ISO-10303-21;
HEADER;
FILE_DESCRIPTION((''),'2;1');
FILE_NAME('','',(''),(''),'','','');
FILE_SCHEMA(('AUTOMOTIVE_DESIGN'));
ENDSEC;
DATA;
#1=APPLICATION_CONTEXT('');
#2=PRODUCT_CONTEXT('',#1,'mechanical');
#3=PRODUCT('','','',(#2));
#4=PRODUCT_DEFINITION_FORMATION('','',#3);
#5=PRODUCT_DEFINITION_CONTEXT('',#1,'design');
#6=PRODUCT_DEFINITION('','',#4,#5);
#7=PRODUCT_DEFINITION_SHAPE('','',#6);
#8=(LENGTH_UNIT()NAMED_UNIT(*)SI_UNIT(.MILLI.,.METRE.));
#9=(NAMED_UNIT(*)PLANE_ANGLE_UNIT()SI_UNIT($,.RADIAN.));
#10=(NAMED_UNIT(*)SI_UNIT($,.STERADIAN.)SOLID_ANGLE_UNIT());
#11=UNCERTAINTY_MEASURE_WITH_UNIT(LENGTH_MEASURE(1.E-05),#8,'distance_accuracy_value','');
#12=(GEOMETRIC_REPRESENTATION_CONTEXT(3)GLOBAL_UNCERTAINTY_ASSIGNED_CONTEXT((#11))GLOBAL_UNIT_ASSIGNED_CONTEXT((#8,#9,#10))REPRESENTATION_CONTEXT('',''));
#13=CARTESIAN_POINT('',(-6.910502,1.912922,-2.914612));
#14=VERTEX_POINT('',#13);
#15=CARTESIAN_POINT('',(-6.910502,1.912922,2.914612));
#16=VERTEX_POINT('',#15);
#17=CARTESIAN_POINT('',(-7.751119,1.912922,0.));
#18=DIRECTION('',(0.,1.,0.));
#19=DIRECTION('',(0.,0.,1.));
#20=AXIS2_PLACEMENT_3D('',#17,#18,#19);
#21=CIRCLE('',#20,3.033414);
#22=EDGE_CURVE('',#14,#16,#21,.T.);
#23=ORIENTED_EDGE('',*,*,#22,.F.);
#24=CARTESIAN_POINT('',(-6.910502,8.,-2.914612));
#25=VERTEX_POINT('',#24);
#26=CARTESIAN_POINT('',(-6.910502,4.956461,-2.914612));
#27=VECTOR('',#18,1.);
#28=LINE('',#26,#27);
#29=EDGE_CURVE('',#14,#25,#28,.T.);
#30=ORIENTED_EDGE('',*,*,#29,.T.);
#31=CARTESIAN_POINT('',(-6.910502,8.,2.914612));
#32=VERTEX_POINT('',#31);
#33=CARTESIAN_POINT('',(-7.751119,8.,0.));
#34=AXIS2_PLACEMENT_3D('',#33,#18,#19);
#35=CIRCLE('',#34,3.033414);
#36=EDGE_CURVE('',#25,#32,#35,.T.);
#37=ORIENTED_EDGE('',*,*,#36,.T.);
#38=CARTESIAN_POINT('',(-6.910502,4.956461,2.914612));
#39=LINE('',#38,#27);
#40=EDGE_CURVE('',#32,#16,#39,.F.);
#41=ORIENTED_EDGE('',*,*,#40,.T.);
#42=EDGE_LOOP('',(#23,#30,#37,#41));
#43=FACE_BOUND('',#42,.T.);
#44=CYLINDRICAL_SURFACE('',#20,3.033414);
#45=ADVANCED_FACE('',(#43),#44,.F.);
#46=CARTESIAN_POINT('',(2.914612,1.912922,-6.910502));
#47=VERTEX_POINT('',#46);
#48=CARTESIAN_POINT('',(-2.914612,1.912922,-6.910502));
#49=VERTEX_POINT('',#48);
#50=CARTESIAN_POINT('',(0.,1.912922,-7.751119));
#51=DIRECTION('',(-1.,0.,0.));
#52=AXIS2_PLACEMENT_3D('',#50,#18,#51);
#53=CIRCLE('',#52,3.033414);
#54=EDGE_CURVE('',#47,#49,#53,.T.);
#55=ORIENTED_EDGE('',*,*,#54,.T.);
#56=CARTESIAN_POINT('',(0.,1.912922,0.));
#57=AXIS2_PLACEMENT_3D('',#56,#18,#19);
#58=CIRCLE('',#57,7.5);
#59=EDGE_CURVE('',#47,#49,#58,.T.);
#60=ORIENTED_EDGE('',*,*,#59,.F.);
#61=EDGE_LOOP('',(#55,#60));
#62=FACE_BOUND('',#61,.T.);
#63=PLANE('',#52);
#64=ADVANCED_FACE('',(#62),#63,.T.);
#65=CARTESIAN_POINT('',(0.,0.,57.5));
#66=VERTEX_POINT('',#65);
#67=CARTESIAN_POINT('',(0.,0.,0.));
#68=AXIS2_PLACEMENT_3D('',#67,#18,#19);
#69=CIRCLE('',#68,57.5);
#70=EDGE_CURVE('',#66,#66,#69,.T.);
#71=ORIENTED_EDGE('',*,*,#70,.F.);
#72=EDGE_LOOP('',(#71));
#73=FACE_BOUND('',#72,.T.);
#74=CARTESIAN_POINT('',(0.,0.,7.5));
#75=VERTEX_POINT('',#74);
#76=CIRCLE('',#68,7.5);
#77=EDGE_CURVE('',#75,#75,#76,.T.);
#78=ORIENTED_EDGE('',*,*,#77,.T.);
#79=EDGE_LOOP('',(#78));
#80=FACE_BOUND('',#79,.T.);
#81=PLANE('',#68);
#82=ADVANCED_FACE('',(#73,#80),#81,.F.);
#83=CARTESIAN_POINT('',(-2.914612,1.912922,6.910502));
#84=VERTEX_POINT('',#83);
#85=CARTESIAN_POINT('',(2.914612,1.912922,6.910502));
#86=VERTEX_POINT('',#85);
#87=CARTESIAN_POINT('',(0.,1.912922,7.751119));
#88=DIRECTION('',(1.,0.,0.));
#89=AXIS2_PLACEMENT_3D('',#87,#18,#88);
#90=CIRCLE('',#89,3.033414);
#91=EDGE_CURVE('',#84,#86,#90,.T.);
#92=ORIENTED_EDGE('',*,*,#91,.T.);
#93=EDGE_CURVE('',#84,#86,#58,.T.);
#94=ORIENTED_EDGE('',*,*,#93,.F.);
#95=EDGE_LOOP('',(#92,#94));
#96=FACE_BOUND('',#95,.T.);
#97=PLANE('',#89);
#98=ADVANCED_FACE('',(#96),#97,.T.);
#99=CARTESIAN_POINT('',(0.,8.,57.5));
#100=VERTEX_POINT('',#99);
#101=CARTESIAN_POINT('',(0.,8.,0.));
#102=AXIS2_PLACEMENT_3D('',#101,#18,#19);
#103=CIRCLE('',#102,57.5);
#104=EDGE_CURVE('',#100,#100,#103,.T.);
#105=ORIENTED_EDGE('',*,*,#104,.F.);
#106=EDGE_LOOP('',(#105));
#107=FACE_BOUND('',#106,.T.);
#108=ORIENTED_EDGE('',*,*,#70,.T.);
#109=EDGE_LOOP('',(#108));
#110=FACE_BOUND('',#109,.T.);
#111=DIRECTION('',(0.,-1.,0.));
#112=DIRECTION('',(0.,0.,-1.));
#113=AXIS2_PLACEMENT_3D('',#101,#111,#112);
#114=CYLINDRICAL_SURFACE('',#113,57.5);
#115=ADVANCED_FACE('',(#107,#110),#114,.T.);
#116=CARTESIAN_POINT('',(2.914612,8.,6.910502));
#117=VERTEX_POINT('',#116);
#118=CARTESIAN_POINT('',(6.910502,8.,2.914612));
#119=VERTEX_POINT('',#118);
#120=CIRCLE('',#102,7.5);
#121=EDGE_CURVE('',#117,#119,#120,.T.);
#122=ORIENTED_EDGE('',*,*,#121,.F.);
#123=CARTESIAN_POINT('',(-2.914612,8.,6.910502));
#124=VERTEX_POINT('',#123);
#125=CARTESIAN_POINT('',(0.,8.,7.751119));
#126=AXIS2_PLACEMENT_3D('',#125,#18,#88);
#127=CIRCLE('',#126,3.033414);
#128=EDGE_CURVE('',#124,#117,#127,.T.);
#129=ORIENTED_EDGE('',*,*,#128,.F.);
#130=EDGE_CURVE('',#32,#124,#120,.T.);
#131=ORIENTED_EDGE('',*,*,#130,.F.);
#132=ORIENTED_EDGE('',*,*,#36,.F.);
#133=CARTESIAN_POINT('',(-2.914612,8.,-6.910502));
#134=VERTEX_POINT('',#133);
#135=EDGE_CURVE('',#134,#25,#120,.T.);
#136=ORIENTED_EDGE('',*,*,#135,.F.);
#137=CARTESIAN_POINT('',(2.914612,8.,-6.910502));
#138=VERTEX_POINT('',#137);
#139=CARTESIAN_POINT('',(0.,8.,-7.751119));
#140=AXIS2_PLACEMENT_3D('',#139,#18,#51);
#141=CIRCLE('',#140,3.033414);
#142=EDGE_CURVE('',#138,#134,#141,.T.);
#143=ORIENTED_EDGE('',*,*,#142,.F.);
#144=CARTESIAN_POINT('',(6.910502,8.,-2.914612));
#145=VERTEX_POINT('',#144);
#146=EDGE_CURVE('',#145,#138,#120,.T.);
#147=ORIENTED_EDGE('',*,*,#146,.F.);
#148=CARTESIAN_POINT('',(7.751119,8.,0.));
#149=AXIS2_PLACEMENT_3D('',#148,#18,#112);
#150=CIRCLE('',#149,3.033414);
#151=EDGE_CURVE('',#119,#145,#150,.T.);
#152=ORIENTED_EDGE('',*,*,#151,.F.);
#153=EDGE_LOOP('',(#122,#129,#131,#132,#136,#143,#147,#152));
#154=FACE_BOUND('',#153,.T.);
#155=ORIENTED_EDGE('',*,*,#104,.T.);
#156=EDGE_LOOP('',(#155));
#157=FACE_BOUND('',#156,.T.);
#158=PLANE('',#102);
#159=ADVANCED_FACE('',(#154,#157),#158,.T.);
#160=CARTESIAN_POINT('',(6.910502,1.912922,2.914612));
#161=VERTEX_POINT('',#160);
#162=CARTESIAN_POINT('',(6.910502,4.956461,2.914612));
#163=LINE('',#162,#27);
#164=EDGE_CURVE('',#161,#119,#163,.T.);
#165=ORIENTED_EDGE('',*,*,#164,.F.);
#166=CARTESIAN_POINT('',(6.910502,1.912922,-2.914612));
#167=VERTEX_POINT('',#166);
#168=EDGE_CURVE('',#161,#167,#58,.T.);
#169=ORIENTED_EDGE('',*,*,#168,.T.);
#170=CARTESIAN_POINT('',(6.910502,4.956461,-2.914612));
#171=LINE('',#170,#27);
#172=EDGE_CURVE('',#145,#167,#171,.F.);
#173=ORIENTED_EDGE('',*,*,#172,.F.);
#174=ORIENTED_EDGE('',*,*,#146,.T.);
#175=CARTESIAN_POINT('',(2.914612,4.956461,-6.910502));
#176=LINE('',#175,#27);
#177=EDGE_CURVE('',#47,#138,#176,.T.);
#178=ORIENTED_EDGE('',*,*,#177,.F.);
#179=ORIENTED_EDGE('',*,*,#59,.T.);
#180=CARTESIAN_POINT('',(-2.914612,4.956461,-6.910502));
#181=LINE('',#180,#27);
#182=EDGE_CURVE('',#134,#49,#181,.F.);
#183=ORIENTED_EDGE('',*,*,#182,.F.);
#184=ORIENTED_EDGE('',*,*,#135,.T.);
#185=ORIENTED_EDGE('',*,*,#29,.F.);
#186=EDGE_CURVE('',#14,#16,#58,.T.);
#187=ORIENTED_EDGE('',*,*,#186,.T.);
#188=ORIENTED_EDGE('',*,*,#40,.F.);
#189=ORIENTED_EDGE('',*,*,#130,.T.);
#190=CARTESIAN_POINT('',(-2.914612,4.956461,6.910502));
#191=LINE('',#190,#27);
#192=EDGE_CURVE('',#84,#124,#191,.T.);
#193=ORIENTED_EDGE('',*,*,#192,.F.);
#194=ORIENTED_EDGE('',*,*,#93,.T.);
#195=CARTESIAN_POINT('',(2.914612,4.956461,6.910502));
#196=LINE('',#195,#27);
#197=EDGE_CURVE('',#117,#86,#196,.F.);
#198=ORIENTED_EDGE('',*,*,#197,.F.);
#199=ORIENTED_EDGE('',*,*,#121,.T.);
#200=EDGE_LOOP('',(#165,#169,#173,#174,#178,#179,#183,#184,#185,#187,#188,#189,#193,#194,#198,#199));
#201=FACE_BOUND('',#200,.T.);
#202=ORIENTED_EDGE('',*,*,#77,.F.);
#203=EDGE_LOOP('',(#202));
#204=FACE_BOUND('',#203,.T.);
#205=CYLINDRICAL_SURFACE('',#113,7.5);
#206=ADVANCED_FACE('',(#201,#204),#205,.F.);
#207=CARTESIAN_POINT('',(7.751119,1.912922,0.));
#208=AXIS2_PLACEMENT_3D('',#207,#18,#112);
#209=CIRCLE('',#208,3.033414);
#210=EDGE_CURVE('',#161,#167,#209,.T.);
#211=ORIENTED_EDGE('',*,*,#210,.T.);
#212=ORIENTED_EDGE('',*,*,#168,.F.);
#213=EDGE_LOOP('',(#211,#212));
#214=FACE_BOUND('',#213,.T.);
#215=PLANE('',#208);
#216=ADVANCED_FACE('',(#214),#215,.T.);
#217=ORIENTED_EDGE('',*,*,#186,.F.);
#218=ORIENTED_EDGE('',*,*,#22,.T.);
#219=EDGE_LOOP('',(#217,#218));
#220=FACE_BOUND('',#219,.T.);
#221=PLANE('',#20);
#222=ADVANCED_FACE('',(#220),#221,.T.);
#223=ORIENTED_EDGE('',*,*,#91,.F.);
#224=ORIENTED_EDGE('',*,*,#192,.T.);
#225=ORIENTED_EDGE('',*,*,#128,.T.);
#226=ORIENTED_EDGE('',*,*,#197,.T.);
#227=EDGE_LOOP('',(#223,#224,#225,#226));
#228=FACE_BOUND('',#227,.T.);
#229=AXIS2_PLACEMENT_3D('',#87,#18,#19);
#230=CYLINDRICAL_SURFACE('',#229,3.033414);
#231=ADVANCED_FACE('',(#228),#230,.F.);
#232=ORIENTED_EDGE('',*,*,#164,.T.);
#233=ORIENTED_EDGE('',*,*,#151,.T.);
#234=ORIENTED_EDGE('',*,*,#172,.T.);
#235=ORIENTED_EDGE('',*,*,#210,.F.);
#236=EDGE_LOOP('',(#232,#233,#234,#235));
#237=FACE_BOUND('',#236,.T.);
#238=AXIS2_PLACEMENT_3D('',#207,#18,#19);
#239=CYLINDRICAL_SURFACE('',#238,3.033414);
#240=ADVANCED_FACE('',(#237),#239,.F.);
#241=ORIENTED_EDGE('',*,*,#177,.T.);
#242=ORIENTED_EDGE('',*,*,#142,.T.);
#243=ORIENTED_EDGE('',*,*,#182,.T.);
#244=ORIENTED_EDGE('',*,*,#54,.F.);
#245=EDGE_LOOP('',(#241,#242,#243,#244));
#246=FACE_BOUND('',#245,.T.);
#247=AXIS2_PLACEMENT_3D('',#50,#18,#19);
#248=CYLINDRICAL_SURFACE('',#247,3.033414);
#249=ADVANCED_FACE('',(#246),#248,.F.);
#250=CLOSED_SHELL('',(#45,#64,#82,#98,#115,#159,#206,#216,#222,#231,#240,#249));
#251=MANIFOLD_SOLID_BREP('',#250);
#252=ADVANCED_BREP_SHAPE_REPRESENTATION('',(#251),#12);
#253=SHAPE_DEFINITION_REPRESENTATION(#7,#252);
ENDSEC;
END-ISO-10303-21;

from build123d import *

# Parameters (mm, degrees)
SKETCH1_R           = 57.5
BOSS_EXTRUDE1_DEPTH = 8
SKETCH2_R           = 7.5
CUT_EXTRUDE1_DEPTH  = 82.709852527
SKETCH3_R           = 3.033414286
CUT_EXTRUDE2_DEPTH  = 6.087077547
CIRPATTERN1_COUNT   = 4


with BuildPart() as part:
    # Sketch1 → Boss-Extrude1 (new body)
    with BuildSketch(Plane(origin=(0, 0, 0), x_dir=(1, 0, 0), z_dir=(0, 1, 0))):
        Circle(SKETCH1_R)
    extrude(amount=BOSS_EXTRUDE1_DEPTH)

    # Sketch2 → Cut-Extrude1 (cut, through all)
    with BuildSketch(Plane(origin=(0, 0, 0), x_dir=(1, 0, 0), z_dir=(0, 1, 0))):
        Circle(SKETCH2_R)
    extrude(amount=CUT_EXTRUDE1_DEPTH, mode=Mode.SUBTRACT)

    # Sketch3 → Cut-Extrude2 (cut)
    with BuildSketch(Plane(origin=(0, 8, 0), x_dir=(1, 0, 0), z_dir=(0, 1, 0))):
        with Locations((-7.751118919, 0)):
            Circle(SKETCH3_R)
    cut_extrude2 = extrude(amount=-CUT_EXTRUDE2_DEPTH, mode=Mode.SUBTRACT)

    # CirPattern1: Cut-Extrude2 ×4 about axis
    cirpattern1_axis = Axis((0, 0, 0), (0, 1, 0))
    for i in range(1, CIRPATTERN1_COUNT):
        add(cut_extrude2.rotate(cirpattern1_axis, i * 360 / CIRPATTERN1_COUNT), mode=Mode.SUBTRACT)


solid = part.part
